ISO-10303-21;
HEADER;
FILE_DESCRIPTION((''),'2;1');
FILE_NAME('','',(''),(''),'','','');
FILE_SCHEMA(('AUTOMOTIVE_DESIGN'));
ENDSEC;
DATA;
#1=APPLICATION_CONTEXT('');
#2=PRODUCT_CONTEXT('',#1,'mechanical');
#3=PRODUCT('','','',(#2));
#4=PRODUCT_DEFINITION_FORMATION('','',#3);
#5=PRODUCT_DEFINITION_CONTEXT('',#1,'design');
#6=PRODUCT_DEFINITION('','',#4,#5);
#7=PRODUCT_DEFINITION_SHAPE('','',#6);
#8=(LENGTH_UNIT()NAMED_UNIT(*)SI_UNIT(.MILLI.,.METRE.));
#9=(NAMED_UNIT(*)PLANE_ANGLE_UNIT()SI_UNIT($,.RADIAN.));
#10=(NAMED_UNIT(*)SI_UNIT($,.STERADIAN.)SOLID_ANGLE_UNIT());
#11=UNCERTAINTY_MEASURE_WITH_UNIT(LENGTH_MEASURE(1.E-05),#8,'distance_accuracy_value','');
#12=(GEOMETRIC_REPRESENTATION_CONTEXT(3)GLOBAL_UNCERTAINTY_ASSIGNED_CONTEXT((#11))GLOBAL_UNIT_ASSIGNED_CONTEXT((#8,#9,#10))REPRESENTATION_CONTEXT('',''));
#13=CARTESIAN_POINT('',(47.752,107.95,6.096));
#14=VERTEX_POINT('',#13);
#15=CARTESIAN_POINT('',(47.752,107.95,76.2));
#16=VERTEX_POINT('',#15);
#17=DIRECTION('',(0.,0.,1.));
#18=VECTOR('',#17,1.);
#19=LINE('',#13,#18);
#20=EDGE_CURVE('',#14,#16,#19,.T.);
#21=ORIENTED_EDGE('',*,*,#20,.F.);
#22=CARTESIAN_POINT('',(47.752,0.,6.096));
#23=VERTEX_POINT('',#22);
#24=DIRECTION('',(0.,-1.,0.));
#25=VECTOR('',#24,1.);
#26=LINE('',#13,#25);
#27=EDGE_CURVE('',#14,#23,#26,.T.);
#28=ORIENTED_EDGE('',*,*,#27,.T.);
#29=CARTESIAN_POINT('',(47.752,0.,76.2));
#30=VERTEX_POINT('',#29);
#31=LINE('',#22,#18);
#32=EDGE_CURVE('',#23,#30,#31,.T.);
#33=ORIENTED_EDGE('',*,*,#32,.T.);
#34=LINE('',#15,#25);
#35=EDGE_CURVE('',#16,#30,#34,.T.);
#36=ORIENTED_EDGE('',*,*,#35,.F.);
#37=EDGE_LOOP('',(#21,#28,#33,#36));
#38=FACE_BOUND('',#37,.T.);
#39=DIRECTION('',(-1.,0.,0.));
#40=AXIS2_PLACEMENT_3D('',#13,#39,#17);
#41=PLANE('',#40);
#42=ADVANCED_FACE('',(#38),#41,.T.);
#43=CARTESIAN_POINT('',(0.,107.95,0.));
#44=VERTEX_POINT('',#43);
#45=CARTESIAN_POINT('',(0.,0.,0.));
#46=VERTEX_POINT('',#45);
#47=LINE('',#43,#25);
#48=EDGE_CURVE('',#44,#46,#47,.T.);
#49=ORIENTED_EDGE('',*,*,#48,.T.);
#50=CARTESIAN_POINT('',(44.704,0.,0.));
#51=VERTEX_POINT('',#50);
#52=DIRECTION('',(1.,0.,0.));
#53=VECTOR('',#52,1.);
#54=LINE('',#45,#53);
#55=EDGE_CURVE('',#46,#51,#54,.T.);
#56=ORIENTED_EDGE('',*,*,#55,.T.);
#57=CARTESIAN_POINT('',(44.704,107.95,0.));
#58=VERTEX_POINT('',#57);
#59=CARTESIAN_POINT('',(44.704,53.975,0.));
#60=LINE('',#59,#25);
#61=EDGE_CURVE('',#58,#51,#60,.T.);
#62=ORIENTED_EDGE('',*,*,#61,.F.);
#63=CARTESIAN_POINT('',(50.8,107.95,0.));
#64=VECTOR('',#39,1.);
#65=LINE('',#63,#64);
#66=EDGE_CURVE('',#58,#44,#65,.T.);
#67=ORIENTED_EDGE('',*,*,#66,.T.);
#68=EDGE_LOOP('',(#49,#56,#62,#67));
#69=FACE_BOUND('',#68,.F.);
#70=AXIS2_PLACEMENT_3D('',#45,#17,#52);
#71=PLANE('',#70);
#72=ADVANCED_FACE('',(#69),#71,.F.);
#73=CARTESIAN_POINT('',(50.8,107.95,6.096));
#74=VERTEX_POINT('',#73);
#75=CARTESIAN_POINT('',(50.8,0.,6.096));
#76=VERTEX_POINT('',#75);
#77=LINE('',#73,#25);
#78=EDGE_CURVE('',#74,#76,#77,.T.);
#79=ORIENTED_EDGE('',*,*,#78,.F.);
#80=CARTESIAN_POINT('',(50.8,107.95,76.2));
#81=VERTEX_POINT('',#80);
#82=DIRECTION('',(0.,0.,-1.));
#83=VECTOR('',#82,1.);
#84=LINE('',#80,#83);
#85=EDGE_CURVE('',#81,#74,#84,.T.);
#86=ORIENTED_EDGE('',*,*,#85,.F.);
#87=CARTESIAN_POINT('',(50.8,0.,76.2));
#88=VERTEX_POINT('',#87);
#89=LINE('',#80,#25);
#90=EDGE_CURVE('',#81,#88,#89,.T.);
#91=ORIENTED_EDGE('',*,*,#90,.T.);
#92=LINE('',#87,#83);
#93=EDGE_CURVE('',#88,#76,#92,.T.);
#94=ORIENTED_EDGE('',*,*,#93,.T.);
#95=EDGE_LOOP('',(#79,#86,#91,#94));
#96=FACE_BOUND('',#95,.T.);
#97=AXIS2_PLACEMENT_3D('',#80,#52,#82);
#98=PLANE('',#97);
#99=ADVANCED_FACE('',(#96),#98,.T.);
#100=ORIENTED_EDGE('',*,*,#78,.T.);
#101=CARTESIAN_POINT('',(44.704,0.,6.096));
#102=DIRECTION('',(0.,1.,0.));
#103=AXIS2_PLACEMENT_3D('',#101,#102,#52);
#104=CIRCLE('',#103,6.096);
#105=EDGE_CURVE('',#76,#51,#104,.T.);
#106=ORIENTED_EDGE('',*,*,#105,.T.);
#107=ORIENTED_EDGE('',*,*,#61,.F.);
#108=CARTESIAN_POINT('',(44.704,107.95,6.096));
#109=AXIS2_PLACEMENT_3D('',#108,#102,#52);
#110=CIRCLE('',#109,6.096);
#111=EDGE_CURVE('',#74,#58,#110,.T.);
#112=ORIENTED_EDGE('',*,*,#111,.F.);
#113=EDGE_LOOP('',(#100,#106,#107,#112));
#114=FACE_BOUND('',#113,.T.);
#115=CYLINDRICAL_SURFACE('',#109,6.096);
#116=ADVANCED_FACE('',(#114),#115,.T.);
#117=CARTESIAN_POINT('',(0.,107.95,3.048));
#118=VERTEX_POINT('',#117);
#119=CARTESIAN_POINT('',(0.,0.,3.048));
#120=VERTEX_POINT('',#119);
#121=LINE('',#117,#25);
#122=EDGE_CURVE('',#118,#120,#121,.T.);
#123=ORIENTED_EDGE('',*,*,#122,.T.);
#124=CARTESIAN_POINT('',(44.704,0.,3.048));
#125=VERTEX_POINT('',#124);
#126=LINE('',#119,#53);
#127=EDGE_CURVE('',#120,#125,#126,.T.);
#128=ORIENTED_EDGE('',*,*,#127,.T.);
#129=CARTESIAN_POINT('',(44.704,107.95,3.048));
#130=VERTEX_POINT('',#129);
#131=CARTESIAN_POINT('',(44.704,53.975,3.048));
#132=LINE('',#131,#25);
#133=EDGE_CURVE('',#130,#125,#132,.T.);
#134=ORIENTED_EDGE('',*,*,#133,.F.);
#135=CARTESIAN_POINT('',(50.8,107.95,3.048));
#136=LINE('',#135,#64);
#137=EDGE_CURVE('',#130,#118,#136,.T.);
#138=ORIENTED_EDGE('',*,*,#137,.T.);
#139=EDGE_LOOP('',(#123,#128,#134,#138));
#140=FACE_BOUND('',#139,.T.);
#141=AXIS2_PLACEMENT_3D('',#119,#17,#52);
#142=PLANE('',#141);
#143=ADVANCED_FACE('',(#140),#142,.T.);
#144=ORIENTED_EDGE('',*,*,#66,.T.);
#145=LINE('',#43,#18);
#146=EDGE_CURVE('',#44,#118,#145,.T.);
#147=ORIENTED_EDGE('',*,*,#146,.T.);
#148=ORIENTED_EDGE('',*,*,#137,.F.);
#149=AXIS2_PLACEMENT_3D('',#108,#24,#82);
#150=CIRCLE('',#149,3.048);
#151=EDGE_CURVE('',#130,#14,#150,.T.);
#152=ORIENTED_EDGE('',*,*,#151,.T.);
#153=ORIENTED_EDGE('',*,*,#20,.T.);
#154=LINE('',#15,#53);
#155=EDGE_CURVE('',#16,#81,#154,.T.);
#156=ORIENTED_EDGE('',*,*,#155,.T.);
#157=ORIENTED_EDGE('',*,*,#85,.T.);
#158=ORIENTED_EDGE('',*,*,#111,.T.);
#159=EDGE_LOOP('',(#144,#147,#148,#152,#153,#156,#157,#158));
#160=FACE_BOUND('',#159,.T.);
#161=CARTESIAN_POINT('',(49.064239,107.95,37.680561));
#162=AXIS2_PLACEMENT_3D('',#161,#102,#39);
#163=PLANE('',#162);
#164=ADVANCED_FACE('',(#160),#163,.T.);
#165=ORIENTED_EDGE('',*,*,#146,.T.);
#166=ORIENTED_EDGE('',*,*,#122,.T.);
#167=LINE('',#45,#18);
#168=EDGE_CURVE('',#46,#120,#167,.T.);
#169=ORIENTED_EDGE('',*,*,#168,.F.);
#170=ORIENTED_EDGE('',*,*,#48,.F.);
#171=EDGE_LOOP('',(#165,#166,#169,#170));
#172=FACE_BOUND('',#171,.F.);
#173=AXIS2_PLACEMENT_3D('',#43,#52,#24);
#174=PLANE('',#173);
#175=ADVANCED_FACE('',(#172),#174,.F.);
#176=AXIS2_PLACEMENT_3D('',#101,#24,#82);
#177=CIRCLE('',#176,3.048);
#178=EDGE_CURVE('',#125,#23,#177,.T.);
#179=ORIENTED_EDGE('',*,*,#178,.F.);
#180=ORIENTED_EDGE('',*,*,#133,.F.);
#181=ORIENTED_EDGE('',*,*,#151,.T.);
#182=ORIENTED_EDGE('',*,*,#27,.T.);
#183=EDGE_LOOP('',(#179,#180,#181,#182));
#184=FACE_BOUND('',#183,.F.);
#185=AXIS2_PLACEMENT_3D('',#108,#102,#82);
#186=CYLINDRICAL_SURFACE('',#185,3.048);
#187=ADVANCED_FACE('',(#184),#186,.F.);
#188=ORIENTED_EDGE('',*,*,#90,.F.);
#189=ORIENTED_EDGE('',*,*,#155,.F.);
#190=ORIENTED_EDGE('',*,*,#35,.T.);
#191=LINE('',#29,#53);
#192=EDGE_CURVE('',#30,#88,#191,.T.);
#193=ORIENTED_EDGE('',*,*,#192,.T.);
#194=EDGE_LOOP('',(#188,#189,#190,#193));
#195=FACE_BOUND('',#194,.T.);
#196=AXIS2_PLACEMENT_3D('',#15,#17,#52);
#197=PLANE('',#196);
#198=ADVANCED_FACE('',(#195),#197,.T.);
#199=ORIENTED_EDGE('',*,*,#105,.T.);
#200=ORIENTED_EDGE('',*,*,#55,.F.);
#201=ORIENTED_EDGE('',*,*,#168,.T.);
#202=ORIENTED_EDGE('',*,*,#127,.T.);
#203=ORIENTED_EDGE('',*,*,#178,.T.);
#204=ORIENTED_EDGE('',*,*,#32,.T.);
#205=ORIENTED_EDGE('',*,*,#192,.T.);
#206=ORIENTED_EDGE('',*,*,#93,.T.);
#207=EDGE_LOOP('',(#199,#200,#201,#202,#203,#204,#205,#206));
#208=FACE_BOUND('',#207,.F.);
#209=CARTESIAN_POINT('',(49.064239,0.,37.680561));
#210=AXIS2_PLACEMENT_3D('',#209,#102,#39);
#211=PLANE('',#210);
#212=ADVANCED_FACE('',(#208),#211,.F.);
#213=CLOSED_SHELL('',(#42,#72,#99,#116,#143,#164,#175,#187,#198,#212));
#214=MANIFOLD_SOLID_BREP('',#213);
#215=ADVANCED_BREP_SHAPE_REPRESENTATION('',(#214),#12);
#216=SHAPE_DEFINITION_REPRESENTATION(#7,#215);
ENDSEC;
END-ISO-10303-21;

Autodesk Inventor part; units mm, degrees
ref_plane "YZ Plane" through (0, 0, 0) normal (1, 0, 0) x (0, 1, 0)
ref_plane "XZ Plane" through (0, 0, 0) normal (0, 1, 0) x (-1, 0, 0)
ref_plane "XY Plane" through (0, 0, 0) normal (0, 0, 1) x (1, 0, 0)
sketch "Sketch1" plane through (0, 0, 0) normal (0, 0, 1) x (1, 0, 0)
  line L0 (0, 0) -> (50.8, 0)
  line L1 (50.8, 0) -> (50.8, 107.95)
  line L2 (50.8, 107.95) -> (0, 107.95)
  line L3 (0, 107.95) -> (0, 0)
  dimension "d0" = 50.8
  dimension "d1" = 107.95
extrude "Plate1" add sketch "Sketch1" along normal blind 3.048
sketch "Sketch2" plane through (47.752, 107.95, 0) normal (1, 0, 0) x (0, 1, 0)
  line L0 (-107.95, 0) -> (0, 0)
  line L1 (0, 0) -> (0, 76.2)
  line L2 (0, 76.2) -> (-107.95, 76.2)
  line L3 (-107.95, 76.2) -> (-107.95, 0)
edge flange "Flange1" height 76.2 angle 90 thickness 3.048 bend radius 3.048 thickness toward (1, 0, 0) relief tear relief width 3.048 relief depth 1.524 edges at (50.8, 53.975, 3.048) wall of the first edge with corners at (47.752, 0, 0) (47.752, 107.95, 0) (47.752, 107.95, 76.2) (47.752, 0, 76.2)
bend "Bend1"
corner "Corner1"
equation "\"d3\" = BendReliefWidth"
equation "\"d4\" = BendReliefDepth"
equation "\"d5\" = MinimumRemnant"
equation "\"d6\" = BendRadius"
equation "\"d9\" = BendRadius"
equation "\"d10\" = CornerReliefSize"
equation "\"d11\" = GapSize"
equation "\"d12\" = JacobiRadiusSize"
equation "\"BendRadius\" = Thickness"
equation "\"BendReliefWidth\" = Thickness"
equation "\"BendReliefDepth\" = 0.5 * Thickness"
equation "\"CornerReliefSize\" = 4 * Thickness"
equation "\"MinimumRemnant\" = 2 * Thickness"
equation "\"TransitionRadius\" = BendRadius"
equation "\"JacobiRadiusSize\" = BendRadius"
equation "\"GapSize\" = Thickness"
equation "\"d2\" = BendRadius"
equation "\"Thickness\" = 3.048"
properties part number "Claw - L bracket"
